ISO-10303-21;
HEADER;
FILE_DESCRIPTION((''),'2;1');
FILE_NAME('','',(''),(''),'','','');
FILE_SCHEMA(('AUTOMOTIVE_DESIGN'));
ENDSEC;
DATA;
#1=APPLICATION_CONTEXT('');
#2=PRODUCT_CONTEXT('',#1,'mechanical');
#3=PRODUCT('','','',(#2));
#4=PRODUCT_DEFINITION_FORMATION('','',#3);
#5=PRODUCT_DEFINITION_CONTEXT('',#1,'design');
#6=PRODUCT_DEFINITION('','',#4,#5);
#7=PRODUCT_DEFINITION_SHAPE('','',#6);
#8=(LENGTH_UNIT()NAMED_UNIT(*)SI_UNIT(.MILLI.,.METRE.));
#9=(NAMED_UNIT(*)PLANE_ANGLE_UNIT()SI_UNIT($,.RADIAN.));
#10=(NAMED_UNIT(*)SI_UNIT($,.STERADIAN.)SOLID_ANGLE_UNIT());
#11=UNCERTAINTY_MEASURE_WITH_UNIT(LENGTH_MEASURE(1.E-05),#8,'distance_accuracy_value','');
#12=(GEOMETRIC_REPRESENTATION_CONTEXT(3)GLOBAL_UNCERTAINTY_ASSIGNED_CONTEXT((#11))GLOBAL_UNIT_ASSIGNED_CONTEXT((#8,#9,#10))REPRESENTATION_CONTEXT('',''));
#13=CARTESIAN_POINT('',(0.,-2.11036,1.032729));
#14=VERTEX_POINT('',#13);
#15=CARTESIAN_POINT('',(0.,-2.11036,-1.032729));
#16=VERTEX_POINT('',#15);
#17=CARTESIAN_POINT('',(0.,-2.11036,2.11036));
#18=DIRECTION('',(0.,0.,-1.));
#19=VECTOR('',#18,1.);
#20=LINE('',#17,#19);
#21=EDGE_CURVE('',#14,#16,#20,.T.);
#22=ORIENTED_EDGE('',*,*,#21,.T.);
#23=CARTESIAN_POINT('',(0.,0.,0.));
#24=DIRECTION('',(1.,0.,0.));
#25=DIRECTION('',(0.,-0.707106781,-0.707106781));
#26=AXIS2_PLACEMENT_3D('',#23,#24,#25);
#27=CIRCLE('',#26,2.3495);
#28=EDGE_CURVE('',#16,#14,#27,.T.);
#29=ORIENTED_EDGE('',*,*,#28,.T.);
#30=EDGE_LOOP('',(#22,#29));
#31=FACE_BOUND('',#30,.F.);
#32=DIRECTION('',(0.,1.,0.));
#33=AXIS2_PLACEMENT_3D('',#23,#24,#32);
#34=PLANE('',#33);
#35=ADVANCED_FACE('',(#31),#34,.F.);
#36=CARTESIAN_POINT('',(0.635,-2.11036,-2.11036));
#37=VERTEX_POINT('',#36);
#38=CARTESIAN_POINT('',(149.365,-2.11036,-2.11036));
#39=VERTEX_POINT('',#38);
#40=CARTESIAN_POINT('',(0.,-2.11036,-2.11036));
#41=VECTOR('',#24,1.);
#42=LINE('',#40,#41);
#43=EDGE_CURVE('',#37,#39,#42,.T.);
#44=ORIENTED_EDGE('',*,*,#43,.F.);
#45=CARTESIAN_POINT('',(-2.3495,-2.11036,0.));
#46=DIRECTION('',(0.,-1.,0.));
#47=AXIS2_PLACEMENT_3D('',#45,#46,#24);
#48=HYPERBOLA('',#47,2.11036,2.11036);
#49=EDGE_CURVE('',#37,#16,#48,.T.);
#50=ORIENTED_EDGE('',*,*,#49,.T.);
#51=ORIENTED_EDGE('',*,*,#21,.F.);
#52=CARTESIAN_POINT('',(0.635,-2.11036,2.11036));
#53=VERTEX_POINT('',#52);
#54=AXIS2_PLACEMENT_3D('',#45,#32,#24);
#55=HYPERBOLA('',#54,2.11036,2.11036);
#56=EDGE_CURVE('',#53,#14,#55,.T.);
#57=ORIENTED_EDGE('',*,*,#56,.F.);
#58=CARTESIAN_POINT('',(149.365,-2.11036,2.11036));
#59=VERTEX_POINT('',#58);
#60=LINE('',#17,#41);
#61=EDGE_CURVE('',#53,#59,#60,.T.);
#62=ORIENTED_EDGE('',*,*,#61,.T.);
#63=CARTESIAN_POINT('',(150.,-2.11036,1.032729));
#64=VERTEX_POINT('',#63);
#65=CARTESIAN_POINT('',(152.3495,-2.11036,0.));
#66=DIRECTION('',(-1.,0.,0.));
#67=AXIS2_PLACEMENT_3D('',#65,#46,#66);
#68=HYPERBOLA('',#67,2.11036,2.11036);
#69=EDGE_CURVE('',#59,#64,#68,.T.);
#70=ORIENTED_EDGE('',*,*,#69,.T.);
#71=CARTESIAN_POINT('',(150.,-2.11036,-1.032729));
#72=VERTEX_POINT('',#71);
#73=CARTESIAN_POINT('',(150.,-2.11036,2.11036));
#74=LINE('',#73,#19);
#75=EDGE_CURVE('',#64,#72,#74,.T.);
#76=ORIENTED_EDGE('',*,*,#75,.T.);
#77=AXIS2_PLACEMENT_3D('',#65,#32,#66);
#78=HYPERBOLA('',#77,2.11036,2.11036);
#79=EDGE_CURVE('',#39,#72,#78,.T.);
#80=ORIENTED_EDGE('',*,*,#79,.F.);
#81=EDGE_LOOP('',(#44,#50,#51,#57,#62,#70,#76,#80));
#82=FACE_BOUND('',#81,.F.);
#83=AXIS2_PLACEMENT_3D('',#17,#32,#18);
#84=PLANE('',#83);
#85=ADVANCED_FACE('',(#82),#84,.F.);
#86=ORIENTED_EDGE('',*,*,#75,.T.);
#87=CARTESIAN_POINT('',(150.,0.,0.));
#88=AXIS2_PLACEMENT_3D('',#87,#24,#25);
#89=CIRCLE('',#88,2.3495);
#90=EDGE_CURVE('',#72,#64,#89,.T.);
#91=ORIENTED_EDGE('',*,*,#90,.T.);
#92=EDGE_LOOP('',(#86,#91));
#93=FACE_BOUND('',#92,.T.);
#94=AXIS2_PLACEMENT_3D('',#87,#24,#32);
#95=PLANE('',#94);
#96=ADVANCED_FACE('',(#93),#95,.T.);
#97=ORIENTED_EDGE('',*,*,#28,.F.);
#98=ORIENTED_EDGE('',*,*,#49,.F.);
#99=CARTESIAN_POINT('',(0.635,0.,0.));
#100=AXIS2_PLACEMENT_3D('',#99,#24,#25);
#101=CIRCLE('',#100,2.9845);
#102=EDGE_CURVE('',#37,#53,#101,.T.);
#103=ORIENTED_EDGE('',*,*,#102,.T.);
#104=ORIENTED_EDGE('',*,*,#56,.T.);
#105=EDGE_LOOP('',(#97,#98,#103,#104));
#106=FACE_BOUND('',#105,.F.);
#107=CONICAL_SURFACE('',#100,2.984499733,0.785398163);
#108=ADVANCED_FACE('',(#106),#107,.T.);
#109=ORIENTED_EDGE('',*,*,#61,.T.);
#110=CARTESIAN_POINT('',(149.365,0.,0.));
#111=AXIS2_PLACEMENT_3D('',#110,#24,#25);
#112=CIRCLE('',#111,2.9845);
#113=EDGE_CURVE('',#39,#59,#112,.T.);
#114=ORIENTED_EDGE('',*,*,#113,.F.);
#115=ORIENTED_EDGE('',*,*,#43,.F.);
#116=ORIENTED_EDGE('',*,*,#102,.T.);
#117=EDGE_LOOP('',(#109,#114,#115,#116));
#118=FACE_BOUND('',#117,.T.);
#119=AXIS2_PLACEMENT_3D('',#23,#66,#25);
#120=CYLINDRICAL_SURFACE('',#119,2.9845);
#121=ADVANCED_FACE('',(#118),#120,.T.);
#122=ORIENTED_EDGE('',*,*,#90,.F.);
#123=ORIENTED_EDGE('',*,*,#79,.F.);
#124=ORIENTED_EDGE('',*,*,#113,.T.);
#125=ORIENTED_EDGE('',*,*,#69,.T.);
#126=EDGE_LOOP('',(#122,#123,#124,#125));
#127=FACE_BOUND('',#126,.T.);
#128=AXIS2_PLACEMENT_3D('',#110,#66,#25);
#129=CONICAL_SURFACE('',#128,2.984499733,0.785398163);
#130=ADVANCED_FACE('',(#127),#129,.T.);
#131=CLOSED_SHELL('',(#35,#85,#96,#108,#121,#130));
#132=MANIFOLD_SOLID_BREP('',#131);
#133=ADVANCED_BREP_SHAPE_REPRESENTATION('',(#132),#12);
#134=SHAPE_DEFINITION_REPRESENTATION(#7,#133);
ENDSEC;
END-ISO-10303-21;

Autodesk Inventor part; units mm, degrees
ref_plane "YZ Plane" through (0, 0, 0) normal (1, 0, 0) x (0, 1, 0)
ref_plane "XZ Plane" through (0, 0, 0) normal (0, 1, 0) x (-1, 0, 0)
ref_plane "XY Plane" through (0, 0, 0) normal (0, 0, 1) x (1, 0, 0)
sketch "Sketch1" plane through (0, 0, 0) normal (1, 0, 0) x (0, 1, 0)
  circle A0 centre (0, 0) radius 2.9845
  line L0 (-2.11036, 2.11036) -> (-2.11036, -2.11036)
  line L1 (-2.11036, -2.11036) -> (0.965216, -5.185936)
  line L2 (-2.11036, -2.11036) -> (2.239161, -2.11036) construction
  dimension "d0" = 5.969
  dimension "d1" = 45
sketch "Sketch1 outline for Extrusion1" plane through (0, 0, 0) normal (1, 0, 0) x (0, 1, 0)
  line L0 (-2.11036, 2.11036) -> (-2.11036, -2.11036)
  arc A0 (-2.11036, -2.11036) -> (-2.11036, 2.11036) centre (0, 0) ccw
extrude "Extrusion1" add sketch "Sketch1 outline for Extrusion1" along normal blind 150
chamfer "Chamfer1" distance 0.635 angle 45 2 edges at (0, 2.9845, 0) (150, 2.9845, 0)
properties part number "Axle3dprinted"
